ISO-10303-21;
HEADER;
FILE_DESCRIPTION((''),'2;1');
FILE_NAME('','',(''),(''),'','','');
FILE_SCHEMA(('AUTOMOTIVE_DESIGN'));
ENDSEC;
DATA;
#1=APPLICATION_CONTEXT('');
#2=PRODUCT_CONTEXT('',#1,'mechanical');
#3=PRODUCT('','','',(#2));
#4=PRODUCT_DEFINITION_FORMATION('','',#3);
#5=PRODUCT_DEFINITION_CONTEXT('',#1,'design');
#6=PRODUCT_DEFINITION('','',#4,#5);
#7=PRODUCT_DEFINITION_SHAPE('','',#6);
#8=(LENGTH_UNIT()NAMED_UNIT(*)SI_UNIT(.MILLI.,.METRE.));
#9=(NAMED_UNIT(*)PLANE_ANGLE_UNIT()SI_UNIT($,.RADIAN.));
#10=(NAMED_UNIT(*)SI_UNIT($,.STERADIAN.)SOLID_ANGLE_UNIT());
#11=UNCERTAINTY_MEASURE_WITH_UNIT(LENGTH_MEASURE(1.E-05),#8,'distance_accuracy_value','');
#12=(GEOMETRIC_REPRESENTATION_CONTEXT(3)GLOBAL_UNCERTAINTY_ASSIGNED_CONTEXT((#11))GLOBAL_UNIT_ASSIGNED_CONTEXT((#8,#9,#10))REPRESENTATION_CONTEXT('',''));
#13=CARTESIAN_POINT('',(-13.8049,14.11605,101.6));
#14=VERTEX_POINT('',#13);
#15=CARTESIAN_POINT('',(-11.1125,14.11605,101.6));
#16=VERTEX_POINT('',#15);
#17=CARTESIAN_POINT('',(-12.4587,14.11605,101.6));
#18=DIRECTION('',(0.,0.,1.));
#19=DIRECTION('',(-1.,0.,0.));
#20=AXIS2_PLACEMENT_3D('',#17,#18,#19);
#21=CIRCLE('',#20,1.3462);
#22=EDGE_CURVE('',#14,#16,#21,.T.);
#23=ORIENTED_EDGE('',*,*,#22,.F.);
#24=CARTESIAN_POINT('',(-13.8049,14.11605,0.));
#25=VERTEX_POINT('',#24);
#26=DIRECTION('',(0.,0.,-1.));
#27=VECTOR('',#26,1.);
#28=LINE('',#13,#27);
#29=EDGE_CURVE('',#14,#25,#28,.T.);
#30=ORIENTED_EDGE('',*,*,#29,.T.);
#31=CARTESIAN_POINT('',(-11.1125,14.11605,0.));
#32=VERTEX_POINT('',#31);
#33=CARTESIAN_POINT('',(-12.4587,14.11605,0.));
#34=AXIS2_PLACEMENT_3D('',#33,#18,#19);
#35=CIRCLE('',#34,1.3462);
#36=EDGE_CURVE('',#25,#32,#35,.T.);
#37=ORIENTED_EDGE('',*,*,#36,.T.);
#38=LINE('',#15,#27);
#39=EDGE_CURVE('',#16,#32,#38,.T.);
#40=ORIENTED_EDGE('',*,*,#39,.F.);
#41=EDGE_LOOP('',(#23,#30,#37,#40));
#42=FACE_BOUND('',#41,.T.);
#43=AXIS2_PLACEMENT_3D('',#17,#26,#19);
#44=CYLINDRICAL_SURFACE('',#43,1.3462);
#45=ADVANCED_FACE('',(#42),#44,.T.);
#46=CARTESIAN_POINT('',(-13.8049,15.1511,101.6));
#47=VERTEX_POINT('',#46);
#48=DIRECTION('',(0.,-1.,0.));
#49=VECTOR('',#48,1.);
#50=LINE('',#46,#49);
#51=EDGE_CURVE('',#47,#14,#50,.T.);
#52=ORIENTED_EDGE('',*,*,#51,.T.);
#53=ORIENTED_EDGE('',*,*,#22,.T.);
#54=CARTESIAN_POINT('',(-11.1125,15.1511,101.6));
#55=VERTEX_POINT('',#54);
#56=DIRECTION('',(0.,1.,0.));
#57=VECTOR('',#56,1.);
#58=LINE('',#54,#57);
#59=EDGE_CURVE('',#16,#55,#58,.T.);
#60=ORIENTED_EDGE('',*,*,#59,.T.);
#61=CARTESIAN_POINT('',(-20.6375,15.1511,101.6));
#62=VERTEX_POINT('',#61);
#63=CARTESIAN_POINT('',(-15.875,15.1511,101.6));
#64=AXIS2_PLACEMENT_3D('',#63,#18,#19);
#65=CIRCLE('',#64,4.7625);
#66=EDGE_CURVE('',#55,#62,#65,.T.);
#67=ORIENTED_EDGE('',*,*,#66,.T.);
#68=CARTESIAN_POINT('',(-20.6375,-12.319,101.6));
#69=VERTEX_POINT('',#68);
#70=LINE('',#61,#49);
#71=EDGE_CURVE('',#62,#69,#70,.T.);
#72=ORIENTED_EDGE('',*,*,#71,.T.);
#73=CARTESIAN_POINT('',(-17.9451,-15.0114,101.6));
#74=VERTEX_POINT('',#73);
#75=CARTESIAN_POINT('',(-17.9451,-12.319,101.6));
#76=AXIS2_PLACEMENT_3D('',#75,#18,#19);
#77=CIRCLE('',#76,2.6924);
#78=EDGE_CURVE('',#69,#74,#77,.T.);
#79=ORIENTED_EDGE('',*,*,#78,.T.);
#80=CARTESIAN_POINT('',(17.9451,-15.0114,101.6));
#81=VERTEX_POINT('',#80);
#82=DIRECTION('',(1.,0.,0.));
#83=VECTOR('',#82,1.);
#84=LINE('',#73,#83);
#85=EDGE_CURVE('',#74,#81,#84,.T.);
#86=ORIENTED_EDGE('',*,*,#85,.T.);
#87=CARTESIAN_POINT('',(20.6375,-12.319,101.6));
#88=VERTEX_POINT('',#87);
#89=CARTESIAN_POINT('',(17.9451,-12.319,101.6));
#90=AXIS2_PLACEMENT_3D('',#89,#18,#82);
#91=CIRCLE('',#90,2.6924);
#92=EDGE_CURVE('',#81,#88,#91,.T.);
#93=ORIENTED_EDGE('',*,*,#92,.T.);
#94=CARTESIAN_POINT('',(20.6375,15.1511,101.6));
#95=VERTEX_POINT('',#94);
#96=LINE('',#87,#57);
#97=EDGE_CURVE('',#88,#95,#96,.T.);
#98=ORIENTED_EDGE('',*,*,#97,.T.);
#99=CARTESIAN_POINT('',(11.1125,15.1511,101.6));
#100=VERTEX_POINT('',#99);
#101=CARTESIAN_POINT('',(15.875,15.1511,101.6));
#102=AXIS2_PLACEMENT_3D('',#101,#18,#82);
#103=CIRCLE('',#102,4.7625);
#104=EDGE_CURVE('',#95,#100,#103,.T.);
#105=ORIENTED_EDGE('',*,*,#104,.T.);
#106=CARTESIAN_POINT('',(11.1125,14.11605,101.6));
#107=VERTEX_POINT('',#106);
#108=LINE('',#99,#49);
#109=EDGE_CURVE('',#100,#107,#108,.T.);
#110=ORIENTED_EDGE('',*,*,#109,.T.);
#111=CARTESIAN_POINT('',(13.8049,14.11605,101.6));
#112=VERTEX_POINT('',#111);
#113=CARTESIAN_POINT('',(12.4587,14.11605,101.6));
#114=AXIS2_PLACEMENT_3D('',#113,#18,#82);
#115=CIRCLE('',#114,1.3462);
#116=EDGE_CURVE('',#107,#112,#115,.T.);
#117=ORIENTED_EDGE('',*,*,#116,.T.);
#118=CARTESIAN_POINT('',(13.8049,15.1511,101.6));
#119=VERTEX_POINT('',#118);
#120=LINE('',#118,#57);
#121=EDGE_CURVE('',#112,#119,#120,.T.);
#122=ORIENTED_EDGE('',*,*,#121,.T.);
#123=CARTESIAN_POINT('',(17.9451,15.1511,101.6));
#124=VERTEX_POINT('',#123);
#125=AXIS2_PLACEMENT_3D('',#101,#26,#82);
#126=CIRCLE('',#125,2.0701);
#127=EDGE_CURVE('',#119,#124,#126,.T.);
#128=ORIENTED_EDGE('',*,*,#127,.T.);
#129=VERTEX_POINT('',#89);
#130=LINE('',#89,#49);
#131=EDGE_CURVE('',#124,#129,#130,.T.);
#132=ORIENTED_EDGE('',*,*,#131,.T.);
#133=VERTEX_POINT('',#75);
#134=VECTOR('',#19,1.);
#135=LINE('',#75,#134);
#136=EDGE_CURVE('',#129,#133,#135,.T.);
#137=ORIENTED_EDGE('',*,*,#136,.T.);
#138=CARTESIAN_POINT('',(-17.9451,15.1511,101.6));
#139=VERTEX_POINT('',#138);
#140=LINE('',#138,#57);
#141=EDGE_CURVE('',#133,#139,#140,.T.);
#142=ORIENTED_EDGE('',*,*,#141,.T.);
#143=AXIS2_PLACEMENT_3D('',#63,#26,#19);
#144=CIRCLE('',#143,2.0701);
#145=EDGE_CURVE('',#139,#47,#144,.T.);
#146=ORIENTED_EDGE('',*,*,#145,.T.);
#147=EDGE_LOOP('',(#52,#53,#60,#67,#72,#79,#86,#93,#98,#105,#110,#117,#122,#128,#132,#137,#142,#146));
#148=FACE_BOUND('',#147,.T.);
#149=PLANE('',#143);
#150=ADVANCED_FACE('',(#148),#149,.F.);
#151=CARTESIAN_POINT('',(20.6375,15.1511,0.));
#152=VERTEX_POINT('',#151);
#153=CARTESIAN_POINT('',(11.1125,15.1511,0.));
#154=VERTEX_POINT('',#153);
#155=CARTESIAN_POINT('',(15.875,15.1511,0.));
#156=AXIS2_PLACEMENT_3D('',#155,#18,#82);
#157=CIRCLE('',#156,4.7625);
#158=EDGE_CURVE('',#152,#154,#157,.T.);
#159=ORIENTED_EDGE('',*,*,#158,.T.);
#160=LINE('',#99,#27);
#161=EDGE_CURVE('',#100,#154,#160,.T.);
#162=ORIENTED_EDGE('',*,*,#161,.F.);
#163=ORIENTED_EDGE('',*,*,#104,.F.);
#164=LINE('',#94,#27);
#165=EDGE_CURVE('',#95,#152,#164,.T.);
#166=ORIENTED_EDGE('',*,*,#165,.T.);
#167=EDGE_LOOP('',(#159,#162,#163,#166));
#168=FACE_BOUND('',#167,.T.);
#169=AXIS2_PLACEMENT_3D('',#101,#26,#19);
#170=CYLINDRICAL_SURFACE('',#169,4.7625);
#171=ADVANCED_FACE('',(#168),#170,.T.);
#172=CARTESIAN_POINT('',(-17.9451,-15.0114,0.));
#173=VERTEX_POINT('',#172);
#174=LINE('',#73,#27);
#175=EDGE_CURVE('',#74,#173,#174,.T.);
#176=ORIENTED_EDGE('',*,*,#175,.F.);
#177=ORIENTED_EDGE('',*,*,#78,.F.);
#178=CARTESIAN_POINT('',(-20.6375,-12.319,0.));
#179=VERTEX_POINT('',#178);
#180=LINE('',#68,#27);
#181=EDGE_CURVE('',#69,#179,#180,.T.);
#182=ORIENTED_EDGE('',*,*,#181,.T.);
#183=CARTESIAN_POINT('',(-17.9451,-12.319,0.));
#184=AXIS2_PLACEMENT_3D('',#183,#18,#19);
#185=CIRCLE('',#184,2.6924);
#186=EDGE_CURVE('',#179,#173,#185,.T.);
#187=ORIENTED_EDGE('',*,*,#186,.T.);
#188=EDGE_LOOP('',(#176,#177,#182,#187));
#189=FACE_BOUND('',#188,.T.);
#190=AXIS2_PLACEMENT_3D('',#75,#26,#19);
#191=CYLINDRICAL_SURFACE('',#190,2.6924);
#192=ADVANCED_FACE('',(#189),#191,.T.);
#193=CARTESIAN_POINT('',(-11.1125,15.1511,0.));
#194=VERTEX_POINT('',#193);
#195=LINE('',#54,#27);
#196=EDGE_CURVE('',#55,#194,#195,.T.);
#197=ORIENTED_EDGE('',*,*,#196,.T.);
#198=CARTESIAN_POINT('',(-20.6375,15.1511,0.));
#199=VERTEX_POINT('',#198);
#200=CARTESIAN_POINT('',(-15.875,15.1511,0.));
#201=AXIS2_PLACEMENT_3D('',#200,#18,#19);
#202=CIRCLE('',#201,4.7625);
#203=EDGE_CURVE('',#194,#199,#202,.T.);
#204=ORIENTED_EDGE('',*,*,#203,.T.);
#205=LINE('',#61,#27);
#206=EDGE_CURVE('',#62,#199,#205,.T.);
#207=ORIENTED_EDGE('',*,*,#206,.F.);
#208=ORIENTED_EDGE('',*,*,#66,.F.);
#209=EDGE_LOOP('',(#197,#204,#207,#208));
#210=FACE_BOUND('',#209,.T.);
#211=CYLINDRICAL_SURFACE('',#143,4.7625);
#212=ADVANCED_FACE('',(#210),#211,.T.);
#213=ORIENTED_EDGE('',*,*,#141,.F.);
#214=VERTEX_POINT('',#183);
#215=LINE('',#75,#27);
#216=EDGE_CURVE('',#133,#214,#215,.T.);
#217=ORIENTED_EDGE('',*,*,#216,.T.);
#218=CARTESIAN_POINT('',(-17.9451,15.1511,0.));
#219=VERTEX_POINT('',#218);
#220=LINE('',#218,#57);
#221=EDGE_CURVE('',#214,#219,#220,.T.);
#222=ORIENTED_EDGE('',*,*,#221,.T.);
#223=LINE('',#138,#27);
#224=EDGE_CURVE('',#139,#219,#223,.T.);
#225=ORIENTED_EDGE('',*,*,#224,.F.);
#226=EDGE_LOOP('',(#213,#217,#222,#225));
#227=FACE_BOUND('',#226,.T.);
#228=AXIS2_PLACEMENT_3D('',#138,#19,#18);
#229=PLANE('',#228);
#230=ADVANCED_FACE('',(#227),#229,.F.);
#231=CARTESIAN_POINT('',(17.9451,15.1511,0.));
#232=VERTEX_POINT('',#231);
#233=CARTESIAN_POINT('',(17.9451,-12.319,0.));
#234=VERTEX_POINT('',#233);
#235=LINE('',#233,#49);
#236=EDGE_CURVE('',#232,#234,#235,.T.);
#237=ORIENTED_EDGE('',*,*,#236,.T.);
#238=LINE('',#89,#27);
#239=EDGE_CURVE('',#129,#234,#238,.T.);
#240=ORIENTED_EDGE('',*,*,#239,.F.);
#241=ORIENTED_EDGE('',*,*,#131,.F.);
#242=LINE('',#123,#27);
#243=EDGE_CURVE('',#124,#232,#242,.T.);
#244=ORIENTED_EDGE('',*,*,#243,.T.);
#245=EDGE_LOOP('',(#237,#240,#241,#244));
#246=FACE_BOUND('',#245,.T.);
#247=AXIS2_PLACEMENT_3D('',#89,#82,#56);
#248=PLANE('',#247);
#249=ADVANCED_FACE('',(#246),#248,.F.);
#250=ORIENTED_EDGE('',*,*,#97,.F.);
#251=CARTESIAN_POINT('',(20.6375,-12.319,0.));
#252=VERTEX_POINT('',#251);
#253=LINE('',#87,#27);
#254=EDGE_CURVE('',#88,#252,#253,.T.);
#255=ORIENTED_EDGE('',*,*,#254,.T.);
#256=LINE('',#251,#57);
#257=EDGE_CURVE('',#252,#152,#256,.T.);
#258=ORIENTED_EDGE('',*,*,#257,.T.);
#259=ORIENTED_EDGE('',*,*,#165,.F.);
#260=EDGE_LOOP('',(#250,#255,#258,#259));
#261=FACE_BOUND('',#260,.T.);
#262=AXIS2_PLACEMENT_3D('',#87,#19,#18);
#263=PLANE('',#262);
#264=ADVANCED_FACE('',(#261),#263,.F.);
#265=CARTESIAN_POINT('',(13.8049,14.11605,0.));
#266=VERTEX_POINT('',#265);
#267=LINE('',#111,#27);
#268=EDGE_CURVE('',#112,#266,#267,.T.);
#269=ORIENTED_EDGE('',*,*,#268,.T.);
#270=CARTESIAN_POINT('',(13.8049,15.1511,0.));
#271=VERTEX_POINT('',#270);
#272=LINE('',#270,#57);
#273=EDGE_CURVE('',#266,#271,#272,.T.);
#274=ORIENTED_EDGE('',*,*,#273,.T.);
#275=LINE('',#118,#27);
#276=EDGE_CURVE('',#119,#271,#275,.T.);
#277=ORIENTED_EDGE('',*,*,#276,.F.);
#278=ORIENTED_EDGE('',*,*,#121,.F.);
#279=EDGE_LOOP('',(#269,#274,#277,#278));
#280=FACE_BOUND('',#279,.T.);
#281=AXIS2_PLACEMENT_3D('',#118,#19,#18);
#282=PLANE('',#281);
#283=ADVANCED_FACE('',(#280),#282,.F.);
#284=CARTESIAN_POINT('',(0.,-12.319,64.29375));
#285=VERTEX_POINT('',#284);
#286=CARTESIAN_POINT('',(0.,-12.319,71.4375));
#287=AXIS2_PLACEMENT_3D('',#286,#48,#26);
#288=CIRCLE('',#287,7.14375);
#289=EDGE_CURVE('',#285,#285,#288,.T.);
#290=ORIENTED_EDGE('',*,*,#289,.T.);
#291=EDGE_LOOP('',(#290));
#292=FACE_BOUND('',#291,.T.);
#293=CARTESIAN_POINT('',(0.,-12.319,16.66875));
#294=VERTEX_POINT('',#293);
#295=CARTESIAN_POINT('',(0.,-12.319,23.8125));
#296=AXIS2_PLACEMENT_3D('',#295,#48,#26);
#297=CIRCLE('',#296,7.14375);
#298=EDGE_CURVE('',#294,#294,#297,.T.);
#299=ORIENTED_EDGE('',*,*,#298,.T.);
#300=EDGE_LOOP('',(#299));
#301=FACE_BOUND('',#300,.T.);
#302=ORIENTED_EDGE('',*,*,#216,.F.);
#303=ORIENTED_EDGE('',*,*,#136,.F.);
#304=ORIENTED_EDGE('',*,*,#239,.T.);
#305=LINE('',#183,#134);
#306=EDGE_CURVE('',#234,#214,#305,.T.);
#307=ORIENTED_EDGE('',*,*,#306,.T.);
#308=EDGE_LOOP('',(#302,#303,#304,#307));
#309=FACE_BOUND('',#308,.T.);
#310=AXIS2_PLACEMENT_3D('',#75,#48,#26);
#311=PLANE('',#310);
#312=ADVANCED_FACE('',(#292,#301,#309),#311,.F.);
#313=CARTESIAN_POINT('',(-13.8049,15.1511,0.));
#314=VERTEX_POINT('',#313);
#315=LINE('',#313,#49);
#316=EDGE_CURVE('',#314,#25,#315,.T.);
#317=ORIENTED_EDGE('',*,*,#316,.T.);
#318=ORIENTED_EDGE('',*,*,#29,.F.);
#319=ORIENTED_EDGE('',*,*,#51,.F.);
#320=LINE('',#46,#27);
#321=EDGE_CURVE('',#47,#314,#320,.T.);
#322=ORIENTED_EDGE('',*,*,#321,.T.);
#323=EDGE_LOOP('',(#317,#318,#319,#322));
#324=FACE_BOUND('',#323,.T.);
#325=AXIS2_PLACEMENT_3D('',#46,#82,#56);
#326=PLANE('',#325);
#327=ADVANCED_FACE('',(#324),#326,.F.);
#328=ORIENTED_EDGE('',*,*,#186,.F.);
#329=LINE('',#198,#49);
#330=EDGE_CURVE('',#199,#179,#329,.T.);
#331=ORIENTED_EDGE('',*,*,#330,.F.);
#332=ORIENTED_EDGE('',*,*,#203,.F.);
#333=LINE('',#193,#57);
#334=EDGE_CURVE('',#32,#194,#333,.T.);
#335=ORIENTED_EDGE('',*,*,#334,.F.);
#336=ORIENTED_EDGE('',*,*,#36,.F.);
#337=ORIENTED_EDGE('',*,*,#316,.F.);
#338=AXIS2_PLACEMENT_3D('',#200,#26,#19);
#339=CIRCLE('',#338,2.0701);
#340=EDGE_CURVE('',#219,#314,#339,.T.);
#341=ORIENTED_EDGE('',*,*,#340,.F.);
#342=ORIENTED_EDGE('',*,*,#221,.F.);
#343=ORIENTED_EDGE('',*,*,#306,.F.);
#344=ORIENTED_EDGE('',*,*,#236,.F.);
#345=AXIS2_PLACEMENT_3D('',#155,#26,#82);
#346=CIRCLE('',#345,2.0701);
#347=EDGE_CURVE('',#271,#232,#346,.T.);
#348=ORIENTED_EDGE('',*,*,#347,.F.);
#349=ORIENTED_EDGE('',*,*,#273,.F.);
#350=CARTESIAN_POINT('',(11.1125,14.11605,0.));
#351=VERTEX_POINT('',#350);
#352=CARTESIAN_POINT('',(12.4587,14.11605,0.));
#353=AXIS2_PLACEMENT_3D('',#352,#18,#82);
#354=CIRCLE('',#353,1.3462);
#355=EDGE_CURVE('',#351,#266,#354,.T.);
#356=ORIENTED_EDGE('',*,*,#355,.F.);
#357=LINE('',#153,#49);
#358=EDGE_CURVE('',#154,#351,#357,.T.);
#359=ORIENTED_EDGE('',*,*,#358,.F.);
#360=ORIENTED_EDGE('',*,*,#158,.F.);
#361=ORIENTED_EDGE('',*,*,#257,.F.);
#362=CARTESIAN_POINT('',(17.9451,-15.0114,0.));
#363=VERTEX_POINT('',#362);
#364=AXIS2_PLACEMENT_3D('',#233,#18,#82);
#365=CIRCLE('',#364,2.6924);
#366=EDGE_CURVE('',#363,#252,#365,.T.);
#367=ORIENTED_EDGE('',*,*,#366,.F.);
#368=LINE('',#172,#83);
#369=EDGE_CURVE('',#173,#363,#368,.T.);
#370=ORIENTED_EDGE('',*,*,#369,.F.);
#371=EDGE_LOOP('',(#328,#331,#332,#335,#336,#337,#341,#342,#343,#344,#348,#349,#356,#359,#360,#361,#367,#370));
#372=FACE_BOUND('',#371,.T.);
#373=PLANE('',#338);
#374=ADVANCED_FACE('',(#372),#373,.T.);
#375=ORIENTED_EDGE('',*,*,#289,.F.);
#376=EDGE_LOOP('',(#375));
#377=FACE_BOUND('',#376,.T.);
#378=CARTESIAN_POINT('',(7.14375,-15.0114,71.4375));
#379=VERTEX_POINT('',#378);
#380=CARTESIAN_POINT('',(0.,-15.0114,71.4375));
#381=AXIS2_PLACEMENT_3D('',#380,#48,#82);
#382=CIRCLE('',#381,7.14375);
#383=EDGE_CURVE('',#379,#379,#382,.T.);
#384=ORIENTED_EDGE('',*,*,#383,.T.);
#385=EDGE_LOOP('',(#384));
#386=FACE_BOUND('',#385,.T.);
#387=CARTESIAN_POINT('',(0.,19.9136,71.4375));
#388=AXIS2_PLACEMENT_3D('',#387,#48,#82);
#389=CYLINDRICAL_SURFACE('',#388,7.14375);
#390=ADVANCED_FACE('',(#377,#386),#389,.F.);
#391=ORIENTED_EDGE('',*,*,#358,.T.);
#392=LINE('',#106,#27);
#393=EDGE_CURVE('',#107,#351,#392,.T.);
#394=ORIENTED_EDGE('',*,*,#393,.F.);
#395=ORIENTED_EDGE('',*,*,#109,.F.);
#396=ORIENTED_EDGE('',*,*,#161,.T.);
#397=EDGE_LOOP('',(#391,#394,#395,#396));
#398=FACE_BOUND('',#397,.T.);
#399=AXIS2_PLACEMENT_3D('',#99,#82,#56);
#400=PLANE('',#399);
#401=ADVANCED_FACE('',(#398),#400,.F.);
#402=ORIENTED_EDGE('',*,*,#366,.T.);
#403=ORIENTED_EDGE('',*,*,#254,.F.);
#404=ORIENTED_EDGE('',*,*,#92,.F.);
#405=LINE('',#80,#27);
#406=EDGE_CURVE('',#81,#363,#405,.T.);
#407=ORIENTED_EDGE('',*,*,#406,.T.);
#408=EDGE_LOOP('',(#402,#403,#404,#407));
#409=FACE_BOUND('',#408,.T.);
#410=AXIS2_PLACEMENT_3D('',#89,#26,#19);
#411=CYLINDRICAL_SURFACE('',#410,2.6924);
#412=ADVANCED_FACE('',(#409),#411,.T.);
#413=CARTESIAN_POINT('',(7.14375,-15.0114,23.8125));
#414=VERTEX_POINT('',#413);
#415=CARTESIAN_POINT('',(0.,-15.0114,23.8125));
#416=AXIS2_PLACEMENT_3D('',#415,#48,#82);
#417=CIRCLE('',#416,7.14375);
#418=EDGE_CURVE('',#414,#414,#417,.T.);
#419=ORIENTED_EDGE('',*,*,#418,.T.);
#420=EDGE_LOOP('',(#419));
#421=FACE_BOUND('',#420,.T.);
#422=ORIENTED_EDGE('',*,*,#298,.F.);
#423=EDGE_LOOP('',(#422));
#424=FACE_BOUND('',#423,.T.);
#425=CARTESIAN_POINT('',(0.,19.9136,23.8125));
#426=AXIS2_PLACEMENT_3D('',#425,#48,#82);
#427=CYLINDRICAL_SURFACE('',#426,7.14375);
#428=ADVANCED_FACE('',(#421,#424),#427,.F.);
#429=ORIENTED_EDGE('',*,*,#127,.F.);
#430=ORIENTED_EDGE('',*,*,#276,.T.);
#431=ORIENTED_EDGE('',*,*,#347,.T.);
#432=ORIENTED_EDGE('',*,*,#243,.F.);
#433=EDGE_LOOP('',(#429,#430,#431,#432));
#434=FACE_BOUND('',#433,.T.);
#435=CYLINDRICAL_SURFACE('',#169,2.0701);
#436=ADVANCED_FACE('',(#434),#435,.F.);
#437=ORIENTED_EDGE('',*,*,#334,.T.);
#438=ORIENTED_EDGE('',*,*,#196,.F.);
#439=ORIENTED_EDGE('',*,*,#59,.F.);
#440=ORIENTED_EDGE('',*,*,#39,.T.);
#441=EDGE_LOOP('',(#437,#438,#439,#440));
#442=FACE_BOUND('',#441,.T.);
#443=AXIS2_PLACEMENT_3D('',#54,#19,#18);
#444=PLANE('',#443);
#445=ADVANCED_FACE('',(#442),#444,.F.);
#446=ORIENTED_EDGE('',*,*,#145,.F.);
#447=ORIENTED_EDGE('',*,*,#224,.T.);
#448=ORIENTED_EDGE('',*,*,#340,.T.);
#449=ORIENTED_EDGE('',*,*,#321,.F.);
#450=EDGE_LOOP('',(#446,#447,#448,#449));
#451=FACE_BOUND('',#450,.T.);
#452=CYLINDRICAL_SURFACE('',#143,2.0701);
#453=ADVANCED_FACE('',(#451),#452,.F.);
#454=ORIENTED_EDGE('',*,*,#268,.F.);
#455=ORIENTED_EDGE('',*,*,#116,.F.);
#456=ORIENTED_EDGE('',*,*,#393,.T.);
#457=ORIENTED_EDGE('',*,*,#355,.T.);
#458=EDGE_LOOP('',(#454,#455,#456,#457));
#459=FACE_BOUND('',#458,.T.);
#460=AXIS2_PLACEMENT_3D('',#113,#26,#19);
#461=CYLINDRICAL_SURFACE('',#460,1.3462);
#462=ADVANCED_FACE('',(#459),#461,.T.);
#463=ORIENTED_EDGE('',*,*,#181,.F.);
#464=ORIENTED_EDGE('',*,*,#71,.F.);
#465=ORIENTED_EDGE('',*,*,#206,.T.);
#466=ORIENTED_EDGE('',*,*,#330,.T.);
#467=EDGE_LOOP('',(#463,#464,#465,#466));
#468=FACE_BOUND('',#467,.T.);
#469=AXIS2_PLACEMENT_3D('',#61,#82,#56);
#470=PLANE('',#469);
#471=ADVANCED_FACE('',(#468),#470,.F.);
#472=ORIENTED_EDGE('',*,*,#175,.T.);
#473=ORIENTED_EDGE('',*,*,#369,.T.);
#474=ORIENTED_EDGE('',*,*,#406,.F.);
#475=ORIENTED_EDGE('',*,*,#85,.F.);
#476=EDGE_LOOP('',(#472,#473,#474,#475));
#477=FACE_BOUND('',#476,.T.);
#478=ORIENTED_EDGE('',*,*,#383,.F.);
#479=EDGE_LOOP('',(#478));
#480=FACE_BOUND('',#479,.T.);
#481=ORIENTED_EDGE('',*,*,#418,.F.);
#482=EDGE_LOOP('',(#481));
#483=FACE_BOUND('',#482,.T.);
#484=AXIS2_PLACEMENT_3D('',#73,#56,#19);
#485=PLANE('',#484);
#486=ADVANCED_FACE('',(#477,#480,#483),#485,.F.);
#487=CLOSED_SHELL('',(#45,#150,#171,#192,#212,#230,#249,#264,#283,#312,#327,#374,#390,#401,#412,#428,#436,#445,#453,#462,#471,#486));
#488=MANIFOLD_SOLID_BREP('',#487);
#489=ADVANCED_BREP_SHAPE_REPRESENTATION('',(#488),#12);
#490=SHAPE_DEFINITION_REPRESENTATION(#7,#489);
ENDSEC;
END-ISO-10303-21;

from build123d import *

# Parameters (mm, degrees)
BASE_EXTRUDE_DEPTH = 101.6
HOLE1_START        = -15.0114
HOLE1_OUTLINE_R    = 7.14375
HOLE1_DEPTH        = 2.6924
LPATTERN2_COUNT    = 2
LPATTERN2_PITCH    = 47.625


# Read off the part's stored shape, not the designer's step: Hole1
with BuildPart() as part:
    # Sketch1 → Base-Extrude (new body)
    with BuildSketch(Plane.XY):
        with BuildLine():
            Line((-20.6375, 15.1511), (-20.6375, -12.319))
            ThreePointArc((-20.6375, -12.319), (-19.848914298, -14.222814298), (-17.9451, -15.0114))
            Line((-17.9451, -15.0114), (17.9451, -15.0114))
            ThreePointArc((17.9451, -15.0114), (19.848914298, -14.222814298), (20.6375, -12.319))
            Line((20.6375, -12.319), (20.6375, 15.1511))
            ThreePointArc((20.6375, 15.1511), (15.875, 19.9136), (11.1125, 15.1511))
            Line((11.1125, 15.1511), (11.1125, 14.11605))
            ThreePointArc((11.1125, 14.11605), (12.4587, 12.76985), (13.8049, 14.11605))
            Line((13.8049, 14.11605), (13.8049, 15.1511))
            ThreePointArc((13.8049, 15.1511), (15.875, 17.2212), (17.9451, 15.1511))
            Line((17.9451, 15.1511), (17.9451, -12.319))
            Line((17.9451, -12.319), (-17.9451, -12.319))
            Line((-17.9451, -12.319), (-17.9451, 15.1511))
            ThreePointArc((-17.9451, 15.1511), (-15.875, 17.2212), (-13.8049, 15.1511))
            Line((-13.8049, 15.1511), (-13.8049, 14.11605))
            ThreePointArc((-13.8049, 14.11605), (-12.4587, 12.76985), (-11.1125, 14.11605))
            Line((-11.1125, 14.11605), (-11.1125, 15.1511))
            ThreePointArc((-11.1125, 15.1511), (-15.875, 19.9136), (-20.6375, 15.1511))
        make_face()
    extrude(amount=BASE_EXTRUDE_DEPTH)

    # Hole1 outline → Hole1 (cut)
    with BuildSketch(Plane(origin=(0, 0, 0), x_dir=(1, 0, 0), z_dir=(0, 1, 0)).offset(HOLE1_START)):
        with Locations((0, -23.8125)):
            Circle(HOLE1_OUTLINE_R)
    hole1 = extrude(amount=HOLE1_DEPTH, mode=Mode.SUBTRACT)

    # LPattern2: Hole1 ×2
    with Locations(*[(0, 0, i * LPATTERN2_PITCH) for i in range(1, LPATTERN2_COUNT)]):
        add(hole1, mode=Mode.SUBTRACT)


solid = part.part
